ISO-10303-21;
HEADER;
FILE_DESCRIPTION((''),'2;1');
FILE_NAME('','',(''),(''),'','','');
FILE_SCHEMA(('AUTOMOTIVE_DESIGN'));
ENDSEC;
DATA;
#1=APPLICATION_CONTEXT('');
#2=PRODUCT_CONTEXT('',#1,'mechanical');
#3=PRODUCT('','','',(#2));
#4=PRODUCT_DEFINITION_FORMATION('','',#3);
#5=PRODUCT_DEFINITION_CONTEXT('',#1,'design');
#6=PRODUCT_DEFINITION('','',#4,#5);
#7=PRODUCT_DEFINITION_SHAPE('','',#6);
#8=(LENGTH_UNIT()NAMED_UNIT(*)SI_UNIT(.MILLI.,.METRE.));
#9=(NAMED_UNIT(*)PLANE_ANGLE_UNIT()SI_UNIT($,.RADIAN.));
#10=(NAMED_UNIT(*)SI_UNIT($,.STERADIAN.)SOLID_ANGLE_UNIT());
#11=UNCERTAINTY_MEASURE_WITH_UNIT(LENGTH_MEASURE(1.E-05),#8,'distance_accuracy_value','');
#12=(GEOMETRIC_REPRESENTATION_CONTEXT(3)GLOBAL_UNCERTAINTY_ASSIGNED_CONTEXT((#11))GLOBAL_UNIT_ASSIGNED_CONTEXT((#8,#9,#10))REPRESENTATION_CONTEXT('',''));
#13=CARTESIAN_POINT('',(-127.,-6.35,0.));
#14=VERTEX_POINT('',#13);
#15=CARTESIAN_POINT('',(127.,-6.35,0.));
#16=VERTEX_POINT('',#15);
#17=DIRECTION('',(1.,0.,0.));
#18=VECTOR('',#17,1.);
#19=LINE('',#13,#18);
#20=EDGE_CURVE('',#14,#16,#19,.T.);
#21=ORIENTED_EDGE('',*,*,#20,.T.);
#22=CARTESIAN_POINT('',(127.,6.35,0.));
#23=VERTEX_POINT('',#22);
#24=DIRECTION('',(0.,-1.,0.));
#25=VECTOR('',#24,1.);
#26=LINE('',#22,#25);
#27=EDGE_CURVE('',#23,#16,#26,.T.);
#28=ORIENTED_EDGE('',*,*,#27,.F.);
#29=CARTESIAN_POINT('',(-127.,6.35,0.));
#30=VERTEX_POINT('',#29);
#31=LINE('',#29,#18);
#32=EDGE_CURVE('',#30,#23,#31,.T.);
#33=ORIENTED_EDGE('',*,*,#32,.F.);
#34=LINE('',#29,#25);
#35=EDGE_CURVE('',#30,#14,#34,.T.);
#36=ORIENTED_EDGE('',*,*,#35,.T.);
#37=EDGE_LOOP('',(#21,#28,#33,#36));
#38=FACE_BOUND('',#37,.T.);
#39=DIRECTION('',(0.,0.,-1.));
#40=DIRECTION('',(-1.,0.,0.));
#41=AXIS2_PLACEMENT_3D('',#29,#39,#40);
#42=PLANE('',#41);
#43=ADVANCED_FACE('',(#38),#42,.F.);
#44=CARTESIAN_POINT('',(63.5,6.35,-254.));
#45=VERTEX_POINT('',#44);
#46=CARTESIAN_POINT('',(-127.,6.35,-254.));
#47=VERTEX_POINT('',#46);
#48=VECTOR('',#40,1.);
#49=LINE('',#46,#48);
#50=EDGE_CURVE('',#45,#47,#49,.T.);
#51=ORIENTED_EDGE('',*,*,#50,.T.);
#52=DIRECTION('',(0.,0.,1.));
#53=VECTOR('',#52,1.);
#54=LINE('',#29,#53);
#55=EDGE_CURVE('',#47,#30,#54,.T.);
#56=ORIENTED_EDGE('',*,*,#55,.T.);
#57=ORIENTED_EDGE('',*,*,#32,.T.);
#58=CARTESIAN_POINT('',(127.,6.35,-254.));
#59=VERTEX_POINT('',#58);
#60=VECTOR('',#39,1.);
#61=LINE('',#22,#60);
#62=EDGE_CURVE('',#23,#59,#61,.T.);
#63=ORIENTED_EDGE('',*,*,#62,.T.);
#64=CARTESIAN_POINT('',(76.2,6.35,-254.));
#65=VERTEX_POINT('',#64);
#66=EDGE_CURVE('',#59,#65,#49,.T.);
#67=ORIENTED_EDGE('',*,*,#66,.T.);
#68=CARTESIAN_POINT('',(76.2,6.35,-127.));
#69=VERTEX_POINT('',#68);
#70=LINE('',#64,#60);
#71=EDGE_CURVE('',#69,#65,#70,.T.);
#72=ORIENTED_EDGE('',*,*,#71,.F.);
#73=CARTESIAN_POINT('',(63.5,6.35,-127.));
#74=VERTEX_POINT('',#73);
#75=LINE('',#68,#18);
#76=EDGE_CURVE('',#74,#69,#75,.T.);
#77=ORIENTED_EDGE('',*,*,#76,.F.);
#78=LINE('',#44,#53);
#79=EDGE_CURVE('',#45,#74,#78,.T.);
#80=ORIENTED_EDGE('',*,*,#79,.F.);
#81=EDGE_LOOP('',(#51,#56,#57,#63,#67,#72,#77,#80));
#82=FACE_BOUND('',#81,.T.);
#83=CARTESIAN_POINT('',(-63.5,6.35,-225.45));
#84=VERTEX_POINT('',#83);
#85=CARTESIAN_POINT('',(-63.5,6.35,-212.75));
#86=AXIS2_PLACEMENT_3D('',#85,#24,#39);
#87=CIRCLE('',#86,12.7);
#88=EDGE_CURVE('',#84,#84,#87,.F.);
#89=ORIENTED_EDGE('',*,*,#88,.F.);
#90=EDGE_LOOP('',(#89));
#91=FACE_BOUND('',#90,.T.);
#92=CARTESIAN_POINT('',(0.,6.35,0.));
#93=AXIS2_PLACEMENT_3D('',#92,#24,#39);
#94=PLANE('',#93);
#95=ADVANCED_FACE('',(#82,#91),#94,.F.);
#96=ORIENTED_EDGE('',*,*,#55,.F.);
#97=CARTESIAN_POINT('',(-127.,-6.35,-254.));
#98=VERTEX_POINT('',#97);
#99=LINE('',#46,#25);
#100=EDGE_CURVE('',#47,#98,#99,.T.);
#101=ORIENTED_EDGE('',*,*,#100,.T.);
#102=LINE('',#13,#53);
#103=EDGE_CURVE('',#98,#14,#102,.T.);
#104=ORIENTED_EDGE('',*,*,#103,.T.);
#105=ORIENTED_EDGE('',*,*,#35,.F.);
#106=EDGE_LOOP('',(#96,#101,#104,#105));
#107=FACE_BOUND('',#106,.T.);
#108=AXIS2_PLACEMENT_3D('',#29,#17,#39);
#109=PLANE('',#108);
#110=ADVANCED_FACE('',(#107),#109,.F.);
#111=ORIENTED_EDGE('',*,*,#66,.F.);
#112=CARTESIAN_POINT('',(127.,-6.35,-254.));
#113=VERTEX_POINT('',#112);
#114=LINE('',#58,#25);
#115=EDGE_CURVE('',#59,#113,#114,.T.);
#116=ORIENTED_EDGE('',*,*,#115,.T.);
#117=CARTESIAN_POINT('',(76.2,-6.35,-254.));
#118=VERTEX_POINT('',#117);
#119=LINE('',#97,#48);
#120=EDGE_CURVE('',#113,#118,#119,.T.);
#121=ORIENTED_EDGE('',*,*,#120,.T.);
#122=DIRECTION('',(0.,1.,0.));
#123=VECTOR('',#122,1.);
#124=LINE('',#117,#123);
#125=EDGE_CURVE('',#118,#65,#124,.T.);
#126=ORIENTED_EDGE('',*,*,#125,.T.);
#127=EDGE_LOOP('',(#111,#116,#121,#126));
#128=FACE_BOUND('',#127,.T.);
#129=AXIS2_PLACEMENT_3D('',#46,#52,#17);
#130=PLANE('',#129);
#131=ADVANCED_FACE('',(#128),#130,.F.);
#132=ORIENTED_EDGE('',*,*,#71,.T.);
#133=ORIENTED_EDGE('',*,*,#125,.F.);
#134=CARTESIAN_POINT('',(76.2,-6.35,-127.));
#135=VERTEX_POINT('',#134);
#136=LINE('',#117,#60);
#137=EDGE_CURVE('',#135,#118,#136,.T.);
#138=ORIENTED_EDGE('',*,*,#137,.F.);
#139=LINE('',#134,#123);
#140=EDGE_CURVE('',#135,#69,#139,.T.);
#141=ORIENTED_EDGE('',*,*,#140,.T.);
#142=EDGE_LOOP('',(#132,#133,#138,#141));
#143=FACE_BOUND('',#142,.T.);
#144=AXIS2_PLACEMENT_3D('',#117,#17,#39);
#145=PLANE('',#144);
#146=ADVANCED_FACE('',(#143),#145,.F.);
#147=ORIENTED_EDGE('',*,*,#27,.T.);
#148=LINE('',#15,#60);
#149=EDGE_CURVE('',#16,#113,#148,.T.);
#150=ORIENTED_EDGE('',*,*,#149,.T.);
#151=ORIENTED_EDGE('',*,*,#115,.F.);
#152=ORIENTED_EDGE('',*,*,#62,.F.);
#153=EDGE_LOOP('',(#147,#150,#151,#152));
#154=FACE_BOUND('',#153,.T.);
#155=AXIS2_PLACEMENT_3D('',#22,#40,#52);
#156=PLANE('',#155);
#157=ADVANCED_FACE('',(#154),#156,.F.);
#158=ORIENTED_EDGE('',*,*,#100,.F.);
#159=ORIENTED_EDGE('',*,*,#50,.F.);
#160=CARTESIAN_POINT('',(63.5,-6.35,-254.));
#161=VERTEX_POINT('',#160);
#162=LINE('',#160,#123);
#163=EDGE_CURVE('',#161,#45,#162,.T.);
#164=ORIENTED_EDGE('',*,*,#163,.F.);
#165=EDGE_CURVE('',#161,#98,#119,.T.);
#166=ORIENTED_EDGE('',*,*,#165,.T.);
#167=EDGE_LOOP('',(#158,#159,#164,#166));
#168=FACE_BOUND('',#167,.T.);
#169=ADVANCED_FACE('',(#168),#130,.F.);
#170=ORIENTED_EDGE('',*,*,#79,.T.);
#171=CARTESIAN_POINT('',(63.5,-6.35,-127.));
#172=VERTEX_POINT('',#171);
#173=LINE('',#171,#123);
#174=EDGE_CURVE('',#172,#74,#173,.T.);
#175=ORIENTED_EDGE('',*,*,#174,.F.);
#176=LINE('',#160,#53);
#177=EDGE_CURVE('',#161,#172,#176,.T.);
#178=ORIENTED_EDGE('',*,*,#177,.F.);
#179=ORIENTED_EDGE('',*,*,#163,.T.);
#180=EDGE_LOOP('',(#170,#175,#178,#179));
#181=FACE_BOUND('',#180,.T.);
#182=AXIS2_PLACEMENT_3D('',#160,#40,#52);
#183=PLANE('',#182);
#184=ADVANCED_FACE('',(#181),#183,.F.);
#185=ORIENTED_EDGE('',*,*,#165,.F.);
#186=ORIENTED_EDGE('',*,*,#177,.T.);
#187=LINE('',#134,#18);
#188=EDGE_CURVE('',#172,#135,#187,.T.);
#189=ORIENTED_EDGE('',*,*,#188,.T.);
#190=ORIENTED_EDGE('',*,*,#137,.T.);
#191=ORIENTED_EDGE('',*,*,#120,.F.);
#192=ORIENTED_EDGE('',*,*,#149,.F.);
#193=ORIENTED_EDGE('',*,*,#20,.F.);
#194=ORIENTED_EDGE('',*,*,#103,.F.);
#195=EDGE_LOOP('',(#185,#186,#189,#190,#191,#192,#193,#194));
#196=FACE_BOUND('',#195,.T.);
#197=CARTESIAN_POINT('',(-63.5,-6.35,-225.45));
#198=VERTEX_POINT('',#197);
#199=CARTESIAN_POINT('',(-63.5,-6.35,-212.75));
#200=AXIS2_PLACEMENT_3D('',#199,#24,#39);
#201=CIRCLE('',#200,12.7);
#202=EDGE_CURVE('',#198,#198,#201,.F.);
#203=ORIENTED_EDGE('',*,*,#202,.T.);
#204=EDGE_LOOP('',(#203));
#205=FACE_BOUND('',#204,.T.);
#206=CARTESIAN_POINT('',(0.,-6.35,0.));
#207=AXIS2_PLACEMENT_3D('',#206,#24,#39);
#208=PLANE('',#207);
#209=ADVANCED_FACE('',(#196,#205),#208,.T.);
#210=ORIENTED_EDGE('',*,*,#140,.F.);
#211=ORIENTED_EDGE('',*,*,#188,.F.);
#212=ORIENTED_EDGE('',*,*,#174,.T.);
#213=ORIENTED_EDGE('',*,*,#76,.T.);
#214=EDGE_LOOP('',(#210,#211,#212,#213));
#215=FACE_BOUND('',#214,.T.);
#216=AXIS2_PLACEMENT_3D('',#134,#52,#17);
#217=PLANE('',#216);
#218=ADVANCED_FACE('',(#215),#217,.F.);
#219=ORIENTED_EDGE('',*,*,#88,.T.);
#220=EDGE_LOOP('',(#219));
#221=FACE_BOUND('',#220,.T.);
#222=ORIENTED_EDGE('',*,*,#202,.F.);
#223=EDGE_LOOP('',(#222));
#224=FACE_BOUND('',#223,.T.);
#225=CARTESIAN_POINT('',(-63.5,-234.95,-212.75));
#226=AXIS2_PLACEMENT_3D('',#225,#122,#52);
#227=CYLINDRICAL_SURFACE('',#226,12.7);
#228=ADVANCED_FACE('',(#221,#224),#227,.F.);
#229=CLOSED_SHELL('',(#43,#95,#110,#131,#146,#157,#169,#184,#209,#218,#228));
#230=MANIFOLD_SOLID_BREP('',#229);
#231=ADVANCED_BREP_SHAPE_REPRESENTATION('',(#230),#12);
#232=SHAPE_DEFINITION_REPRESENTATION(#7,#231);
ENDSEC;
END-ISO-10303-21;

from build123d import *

# Parameters (mm, degrees)
SKETCH1_W               = 254
SKETCH1_H               = 254
BOSS_EXTRUDE1_DEPTH     = 6.35
CAVITY1_START           = -6.35
CAVITY1_OUTLINE_R       = 12.7
CAVITY1_DEPTH           = 12.7
CUT_EXTRUDE1_DEPTH      = 285.051619429
CUT_EXTRUDE1_DEPTH_BACK = 285.051619429
SKETCH2_W               = 12.7
SKETCH2_H               = 127


# Read off the part's stored shape, not the designer's step: Cavity1
with BuildPart() as part:
    # Sketch1 → Boss-Extrude1 (new, symmetric)
    with BuildSketch(Plane(origin=(0, 0, 0), x_dir=(1, 0, 0), z_dir=(0, 1, 0))):
        with Locations((0, 127)):
            Rectangle(SKETCH1_W, SKETCH1_H)
    extrude(amount=BOSS_EXTRUDE1_DEPTH, both=True)

    # Cavity1 outline → Cavity1 (cut)
    with BuildSketch(Plane(origin=(0, 0, 0), x_dir=(1, 0, 0), z_dir=(0, 1, 0)).offset(CAVITY1_START)):
        with Locations((-63.5, 212.75)):
            Circle(CAVITY1_OUTLINE_R)
    extrude(amount=CAVITY1_DEPTH, mode=Mode.SUBTRACT)

    # Sketch2 → Cut-Extrude1 (cut, two sides: drawn at the far end of the back side and taken through both)
    with BuildSketch(Plane(origin=(0, 0, 0), x_dir=(1, 0, 0), z_dir=(0, 1, 0)).offset(-CUT_EXTRUDE1_DEPTH_BACK)):
        with Locations((69.85, 190.5)):
            Rectangle(SKETCH2_W, SKETCH2_H)
    extrude(amount=CUT_EXTRUDE1_DEPTH + CUT_EXTRUDE1_DEPTH_BACK, mode=Mode.SUBTRACT)


solid = part.part
